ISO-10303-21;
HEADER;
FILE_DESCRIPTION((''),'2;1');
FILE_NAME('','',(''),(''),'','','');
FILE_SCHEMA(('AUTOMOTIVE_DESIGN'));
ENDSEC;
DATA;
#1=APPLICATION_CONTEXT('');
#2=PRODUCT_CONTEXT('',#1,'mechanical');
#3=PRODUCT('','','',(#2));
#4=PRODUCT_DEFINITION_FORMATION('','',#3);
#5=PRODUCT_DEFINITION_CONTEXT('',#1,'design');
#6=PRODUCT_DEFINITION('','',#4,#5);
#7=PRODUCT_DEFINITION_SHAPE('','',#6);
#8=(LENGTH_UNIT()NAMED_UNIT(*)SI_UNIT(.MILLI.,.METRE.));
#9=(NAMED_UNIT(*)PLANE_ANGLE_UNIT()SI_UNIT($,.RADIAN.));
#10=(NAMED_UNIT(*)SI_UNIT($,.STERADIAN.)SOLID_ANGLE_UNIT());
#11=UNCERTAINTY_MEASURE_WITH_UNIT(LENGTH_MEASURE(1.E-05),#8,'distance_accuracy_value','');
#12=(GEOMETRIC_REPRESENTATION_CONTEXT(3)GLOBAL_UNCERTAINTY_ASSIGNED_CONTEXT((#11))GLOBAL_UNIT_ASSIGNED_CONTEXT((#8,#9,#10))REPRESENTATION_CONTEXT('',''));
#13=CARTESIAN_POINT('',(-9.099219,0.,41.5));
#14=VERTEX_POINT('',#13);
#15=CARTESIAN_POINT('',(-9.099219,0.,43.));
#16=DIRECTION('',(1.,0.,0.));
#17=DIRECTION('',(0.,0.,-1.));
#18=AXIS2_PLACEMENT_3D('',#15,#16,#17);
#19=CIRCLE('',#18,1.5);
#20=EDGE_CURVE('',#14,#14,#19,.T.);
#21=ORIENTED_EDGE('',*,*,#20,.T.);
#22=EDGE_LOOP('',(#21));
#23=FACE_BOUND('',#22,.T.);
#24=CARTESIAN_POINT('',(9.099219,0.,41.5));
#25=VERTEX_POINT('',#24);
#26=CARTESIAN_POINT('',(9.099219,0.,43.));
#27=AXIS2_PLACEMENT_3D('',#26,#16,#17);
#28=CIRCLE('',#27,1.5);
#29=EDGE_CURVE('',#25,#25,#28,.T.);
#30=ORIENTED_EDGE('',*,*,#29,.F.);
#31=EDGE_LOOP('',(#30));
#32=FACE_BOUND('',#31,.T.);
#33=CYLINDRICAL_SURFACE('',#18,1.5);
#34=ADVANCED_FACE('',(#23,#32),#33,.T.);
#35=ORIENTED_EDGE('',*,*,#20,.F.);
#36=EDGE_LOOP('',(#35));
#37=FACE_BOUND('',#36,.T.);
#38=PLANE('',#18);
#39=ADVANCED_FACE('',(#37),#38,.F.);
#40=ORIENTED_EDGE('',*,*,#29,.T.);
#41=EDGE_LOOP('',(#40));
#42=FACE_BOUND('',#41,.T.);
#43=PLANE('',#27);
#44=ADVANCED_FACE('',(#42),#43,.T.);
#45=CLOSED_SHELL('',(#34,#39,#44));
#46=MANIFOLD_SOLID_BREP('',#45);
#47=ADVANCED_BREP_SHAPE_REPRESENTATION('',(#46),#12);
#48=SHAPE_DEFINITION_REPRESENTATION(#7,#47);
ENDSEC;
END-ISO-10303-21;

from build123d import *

# Parameters (mm, degrees)
HAND_START                 = -9.09921875
HAND_MASTERMODEL_OUTLINE_R = 1.5
HAND_MASTERMODEL_DEPTH     = 18.1984375
SKETCH23_R                 = 1.5
BOSS_EXTRUDE2_DEPTH        = 9.099219


# Read off the part's stored shape, not the designer's step: hand mastermodel
with BuildPart() as part:
    # hand mastermodel outline → hand mastermodel (new body)
    with BuildSketch(Plane.YZ.offset(HAND_START)):
        with Locations((0, 43)):
            Circle(HAND_MASTERMODEL_OUTLINE_R)
    extrude(amount=HAND_MASTERMODEL_DEPTH)

    # Sketch23 → Boss-Extrude2 (add)
    with BuildSketch(Plane(origin=(0, 0, 0), x_dir=(0, 0, -1), z_dir=(1, 0, 0))):
        with Locations((-43, 0)):
            Circle(SKETCH23_R)
    extrude(amount=BOSS_EXTRUDE2_DEPTH)


solid = part.part
